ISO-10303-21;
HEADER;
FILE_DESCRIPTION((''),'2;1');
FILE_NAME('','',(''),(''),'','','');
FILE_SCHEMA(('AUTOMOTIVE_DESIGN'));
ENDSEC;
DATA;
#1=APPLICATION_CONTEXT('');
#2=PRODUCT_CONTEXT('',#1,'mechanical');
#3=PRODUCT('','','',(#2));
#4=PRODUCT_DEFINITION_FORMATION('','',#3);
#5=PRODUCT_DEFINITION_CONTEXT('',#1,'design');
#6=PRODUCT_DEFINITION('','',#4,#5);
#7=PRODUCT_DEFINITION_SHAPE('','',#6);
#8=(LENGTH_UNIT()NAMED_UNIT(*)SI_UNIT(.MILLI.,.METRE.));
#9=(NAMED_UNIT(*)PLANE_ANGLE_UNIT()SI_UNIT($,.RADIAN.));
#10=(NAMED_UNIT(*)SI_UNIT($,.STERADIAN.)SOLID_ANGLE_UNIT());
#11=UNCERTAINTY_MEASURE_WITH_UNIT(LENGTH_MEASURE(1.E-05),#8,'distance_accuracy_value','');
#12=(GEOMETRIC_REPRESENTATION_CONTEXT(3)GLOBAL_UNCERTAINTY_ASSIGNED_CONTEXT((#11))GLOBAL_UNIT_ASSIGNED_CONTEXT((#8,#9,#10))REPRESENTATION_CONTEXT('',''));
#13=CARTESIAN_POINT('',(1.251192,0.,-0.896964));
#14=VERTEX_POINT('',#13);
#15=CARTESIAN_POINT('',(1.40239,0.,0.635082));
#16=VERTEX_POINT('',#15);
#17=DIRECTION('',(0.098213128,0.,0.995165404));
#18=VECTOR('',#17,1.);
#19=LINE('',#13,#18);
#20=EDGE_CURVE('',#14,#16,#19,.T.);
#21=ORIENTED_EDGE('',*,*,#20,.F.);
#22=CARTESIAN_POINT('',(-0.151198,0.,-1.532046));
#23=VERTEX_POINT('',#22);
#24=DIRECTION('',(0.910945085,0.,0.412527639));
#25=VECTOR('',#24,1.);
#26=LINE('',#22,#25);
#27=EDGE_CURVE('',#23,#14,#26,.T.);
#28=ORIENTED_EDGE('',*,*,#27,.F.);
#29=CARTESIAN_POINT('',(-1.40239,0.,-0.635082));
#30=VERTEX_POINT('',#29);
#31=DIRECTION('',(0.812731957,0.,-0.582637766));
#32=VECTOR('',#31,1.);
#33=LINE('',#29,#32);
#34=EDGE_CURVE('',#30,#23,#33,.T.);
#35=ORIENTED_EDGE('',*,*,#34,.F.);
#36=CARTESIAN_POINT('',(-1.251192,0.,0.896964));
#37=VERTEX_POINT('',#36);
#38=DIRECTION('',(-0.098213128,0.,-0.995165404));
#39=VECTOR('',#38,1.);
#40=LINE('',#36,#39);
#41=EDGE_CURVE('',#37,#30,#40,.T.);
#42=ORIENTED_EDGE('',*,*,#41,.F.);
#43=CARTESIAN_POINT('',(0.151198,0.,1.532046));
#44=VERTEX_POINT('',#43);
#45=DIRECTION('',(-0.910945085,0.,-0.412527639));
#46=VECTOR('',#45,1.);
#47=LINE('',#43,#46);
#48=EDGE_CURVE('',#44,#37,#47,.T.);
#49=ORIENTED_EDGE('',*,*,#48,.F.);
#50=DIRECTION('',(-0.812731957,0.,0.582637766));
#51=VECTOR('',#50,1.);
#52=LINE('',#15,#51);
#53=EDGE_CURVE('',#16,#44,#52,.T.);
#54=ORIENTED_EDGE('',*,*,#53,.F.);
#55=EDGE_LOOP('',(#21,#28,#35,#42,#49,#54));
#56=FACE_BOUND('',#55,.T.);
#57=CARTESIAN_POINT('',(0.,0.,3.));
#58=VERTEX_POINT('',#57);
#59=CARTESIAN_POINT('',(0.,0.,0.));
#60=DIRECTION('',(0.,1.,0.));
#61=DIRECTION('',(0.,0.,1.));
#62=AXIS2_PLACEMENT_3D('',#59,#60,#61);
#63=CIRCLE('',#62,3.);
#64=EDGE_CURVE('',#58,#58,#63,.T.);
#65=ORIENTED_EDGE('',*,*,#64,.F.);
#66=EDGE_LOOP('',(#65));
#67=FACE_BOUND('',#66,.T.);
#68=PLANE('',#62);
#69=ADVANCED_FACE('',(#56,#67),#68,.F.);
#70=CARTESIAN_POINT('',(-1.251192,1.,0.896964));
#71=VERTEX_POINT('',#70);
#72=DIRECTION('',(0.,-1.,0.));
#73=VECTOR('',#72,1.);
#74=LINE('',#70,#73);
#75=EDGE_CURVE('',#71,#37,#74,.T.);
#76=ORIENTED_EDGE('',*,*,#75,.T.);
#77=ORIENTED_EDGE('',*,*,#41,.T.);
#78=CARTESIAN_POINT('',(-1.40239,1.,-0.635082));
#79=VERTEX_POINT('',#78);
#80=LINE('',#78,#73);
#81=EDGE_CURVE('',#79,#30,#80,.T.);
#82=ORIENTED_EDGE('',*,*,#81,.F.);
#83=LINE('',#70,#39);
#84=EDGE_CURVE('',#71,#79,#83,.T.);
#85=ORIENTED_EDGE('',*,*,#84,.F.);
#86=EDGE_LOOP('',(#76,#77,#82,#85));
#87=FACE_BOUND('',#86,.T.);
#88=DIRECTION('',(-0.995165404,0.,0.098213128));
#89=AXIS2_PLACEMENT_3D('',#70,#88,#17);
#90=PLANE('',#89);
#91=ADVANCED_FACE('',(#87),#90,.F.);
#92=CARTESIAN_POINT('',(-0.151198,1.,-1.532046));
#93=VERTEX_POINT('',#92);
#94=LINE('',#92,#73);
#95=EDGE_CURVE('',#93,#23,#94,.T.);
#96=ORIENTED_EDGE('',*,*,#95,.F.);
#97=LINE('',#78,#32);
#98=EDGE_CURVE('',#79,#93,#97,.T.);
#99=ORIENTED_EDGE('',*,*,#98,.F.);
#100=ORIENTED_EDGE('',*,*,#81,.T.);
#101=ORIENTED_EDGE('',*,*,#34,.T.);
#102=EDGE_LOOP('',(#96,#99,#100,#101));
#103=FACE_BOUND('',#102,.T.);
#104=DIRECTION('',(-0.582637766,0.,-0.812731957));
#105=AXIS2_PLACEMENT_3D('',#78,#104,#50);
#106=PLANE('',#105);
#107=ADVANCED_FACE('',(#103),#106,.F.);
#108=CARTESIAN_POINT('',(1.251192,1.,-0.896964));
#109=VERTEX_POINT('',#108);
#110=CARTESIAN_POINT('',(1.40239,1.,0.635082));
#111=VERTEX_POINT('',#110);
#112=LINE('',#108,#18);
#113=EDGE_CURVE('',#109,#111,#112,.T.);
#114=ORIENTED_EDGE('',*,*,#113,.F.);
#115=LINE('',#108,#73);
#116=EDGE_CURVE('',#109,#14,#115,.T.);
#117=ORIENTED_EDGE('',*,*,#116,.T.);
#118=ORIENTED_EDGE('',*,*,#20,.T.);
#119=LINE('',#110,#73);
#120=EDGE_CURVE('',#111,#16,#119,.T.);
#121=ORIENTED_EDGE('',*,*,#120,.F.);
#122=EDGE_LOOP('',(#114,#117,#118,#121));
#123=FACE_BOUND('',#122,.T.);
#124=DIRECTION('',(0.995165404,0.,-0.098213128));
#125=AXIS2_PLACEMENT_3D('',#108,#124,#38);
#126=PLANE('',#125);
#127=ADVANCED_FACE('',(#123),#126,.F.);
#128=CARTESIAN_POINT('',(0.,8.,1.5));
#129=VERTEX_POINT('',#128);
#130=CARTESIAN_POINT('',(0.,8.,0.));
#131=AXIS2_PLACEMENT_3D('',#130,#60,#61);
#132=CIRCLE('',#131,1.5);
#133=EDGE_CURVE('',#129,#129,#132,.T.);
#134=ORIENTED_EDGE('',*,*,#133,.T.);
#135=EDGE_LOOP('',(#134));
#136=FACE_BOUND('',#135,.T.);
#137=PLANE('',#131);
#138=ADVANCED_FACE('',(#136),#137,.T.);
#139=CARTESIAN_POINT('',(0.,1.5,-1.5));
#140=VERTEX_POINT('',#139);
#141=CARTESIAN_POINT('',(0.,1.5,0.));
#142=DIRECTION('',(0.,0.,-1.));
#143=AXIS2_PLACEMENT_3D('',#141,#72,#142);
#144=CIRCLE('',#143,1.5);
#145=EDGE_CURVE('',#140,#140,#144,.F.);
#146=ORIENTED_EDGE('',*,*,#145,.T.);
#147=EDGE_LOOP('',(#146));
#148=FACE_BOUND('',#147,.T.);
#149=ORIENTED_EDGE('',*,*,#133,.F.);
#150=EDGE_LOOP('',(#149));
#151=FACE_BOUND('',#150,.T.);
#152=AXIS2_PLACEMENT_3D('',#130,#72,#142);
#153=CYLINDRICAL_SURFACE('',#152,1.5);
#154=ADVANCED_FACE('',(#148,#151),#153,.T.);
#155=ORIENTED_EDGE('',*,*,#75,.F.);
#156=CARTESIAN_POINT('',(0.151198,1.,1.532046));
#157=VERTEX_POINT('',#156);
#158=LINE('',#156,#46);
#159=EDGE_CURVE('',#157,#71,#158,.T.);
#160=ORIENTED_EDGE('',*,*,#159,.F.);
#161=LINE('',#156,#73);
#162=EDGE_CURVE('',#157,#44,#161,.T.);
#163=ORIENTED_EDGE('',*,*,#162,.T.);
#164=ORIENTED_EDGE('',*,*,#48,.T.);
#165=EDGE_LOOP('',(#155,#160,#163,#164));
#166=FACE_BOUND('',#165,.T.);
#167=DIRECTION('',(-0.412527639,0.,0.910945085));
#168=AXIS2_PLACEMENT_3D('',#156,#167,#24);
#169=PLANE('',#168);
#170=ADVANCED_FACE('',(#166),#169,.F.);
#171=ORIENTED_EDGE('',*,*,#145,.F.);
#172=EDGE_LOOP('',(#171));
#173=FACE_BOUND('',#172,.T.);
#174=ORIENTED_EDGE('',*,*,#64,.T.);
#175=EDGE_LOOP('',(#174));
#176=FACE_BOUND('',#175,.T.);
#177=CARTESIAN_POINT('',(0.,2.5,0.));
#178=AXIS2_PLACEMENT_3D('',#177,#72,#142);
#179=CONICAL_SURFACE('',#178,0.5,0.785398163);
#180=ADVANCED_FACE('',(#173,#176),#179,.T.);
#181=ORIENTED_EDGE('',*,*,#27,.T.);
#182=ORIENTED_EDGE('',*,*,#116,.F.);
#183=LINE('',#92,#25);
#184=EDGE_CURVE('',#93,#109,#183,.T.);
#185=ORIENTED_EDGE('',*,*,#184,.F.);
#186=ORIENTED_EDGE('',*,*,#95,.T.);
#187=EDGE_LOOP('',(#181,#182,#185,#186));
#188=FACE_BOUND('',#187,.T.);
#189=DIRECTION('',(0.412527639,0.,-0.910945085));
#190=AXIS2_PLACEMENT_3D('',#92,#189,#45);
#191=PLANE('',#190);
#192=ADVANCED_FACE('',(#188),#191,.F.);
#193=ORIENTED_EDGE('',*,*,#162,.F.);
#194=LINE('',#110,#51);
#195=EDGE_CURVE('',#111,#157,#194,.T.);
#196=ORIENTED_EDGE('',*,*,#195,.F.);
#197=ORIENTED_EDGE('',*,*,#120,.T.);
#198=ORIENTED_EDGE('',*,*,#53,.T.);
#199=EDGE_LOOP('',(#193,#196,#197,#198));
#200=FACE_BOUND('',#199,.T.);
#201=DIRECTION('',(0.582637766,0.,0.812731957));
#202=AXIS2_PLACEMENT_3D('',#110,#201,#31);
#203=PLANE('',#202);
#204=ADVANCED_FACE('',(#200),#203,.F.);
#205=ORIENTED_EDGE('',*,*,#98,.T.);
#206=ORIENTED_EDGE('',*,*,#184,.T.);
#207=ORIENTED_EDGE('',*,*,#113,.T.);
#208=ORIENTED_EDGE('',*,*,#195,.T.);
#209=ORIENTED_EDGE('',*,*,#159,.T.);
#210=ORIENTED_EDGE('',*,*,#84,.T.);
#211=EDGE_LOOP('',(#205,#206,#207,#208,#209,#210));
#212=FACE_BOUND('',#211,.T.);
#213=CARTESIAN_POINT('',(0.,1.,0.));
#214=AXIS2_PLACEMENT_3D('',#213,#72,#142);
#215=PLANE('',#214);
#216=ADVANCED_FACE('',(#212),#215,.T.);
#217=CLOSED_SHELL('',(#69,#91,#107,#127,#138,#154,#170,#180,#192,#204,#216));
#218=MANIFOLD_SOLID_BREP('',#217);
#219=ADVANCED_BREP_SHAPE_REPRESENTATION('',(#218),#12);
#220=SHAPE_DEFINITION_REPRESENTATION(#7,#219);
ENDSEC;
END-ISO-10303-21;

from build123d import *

# Parameters (mm, degrees)
SKETCH1_R           = 3
BOSS_EXTRUDE1_DEPTH = 2.5
SKETCH2_R           = 1.5
BOSS_EXTRUDE2_DEPTH = 5.5
CHAMFER1_SIZE       = 2.5
CUT_EXTRUDE1_DEPTH  = 1


with BuildPart() as part:
    # Sketch1 → Boss-Extrude1 (new body)
    with BuildSketch(Plane(origin=(0, 0, 0), x_dir=(1, 0, 0), z_dir=(0, 1, 0))):
        with Locations(Location((0, 0, 0), (0, 0, 270))):
            Circle(SKETCH1_R)
    extrude(amount=BOSS_EXTRUDE1_DEPTH)

    # Sketch2 → Boss-Extrude2 (add)
    with BuildSketch(Plane(origin=(0, 2.5, 0), x_dir=(1, 0, 0), z_dir=(0, 1, 0))):
        with Locations(Location((0, 0, 0), (0, 0, 270))):
            Circle(SKETCH2_R)
    extrude(amount=BOSS_EXTRUDE2_DEPTH)

    # Chamfer1
    # the kernel refuses this chamfer: 2.5 mm, written as the material it takes off along each edge
    with BuildSketch(Plane(origin=(0, 2.5, 0), x_dir=(0, 0, 1), z_dir=(-1, 0, 0))) as chamfer1_piece_1_section:
        Polygon((3, -CHAMFER1_SIZE), (3 - CHAMFER1_SIZE, 0), (3, 0), align=None)
    chamfer1_piece_1 = revolve(axis=Axis((0, 2.5, 0), (0, 1, 0)), mode=Mode.PRIVATE)
    chamfer1_piece_1 = chamfer1_piece_1 - Plane(origin=(0, 0.739386172, 0), x_dir=(0, 0, 1), z_dir=(0, -1, 0)) * Cylinder(1.5, 12, mode=Mode.PRIVATE)
    add(chamfer1_piece_1, mode=Mode.SUBTRACT)

    # Sketch3 → Cut-Extrude1 (cut)
    with BuildSketch(Plane.XZ):
        Polygon((1.251191911, -0.896964433), (1.402389941, 0.635081763), (0.15119803, 1.532046196), (-1.251191911, 0.896964433), (-1.402389941, -0.635081763), (-0.15119803, -1.532046196), align=None)
    extrude(amount=-CUT_EXTRUDE1_DEPTH, mode=Mode.SUBTRACT)


solid = part.part
